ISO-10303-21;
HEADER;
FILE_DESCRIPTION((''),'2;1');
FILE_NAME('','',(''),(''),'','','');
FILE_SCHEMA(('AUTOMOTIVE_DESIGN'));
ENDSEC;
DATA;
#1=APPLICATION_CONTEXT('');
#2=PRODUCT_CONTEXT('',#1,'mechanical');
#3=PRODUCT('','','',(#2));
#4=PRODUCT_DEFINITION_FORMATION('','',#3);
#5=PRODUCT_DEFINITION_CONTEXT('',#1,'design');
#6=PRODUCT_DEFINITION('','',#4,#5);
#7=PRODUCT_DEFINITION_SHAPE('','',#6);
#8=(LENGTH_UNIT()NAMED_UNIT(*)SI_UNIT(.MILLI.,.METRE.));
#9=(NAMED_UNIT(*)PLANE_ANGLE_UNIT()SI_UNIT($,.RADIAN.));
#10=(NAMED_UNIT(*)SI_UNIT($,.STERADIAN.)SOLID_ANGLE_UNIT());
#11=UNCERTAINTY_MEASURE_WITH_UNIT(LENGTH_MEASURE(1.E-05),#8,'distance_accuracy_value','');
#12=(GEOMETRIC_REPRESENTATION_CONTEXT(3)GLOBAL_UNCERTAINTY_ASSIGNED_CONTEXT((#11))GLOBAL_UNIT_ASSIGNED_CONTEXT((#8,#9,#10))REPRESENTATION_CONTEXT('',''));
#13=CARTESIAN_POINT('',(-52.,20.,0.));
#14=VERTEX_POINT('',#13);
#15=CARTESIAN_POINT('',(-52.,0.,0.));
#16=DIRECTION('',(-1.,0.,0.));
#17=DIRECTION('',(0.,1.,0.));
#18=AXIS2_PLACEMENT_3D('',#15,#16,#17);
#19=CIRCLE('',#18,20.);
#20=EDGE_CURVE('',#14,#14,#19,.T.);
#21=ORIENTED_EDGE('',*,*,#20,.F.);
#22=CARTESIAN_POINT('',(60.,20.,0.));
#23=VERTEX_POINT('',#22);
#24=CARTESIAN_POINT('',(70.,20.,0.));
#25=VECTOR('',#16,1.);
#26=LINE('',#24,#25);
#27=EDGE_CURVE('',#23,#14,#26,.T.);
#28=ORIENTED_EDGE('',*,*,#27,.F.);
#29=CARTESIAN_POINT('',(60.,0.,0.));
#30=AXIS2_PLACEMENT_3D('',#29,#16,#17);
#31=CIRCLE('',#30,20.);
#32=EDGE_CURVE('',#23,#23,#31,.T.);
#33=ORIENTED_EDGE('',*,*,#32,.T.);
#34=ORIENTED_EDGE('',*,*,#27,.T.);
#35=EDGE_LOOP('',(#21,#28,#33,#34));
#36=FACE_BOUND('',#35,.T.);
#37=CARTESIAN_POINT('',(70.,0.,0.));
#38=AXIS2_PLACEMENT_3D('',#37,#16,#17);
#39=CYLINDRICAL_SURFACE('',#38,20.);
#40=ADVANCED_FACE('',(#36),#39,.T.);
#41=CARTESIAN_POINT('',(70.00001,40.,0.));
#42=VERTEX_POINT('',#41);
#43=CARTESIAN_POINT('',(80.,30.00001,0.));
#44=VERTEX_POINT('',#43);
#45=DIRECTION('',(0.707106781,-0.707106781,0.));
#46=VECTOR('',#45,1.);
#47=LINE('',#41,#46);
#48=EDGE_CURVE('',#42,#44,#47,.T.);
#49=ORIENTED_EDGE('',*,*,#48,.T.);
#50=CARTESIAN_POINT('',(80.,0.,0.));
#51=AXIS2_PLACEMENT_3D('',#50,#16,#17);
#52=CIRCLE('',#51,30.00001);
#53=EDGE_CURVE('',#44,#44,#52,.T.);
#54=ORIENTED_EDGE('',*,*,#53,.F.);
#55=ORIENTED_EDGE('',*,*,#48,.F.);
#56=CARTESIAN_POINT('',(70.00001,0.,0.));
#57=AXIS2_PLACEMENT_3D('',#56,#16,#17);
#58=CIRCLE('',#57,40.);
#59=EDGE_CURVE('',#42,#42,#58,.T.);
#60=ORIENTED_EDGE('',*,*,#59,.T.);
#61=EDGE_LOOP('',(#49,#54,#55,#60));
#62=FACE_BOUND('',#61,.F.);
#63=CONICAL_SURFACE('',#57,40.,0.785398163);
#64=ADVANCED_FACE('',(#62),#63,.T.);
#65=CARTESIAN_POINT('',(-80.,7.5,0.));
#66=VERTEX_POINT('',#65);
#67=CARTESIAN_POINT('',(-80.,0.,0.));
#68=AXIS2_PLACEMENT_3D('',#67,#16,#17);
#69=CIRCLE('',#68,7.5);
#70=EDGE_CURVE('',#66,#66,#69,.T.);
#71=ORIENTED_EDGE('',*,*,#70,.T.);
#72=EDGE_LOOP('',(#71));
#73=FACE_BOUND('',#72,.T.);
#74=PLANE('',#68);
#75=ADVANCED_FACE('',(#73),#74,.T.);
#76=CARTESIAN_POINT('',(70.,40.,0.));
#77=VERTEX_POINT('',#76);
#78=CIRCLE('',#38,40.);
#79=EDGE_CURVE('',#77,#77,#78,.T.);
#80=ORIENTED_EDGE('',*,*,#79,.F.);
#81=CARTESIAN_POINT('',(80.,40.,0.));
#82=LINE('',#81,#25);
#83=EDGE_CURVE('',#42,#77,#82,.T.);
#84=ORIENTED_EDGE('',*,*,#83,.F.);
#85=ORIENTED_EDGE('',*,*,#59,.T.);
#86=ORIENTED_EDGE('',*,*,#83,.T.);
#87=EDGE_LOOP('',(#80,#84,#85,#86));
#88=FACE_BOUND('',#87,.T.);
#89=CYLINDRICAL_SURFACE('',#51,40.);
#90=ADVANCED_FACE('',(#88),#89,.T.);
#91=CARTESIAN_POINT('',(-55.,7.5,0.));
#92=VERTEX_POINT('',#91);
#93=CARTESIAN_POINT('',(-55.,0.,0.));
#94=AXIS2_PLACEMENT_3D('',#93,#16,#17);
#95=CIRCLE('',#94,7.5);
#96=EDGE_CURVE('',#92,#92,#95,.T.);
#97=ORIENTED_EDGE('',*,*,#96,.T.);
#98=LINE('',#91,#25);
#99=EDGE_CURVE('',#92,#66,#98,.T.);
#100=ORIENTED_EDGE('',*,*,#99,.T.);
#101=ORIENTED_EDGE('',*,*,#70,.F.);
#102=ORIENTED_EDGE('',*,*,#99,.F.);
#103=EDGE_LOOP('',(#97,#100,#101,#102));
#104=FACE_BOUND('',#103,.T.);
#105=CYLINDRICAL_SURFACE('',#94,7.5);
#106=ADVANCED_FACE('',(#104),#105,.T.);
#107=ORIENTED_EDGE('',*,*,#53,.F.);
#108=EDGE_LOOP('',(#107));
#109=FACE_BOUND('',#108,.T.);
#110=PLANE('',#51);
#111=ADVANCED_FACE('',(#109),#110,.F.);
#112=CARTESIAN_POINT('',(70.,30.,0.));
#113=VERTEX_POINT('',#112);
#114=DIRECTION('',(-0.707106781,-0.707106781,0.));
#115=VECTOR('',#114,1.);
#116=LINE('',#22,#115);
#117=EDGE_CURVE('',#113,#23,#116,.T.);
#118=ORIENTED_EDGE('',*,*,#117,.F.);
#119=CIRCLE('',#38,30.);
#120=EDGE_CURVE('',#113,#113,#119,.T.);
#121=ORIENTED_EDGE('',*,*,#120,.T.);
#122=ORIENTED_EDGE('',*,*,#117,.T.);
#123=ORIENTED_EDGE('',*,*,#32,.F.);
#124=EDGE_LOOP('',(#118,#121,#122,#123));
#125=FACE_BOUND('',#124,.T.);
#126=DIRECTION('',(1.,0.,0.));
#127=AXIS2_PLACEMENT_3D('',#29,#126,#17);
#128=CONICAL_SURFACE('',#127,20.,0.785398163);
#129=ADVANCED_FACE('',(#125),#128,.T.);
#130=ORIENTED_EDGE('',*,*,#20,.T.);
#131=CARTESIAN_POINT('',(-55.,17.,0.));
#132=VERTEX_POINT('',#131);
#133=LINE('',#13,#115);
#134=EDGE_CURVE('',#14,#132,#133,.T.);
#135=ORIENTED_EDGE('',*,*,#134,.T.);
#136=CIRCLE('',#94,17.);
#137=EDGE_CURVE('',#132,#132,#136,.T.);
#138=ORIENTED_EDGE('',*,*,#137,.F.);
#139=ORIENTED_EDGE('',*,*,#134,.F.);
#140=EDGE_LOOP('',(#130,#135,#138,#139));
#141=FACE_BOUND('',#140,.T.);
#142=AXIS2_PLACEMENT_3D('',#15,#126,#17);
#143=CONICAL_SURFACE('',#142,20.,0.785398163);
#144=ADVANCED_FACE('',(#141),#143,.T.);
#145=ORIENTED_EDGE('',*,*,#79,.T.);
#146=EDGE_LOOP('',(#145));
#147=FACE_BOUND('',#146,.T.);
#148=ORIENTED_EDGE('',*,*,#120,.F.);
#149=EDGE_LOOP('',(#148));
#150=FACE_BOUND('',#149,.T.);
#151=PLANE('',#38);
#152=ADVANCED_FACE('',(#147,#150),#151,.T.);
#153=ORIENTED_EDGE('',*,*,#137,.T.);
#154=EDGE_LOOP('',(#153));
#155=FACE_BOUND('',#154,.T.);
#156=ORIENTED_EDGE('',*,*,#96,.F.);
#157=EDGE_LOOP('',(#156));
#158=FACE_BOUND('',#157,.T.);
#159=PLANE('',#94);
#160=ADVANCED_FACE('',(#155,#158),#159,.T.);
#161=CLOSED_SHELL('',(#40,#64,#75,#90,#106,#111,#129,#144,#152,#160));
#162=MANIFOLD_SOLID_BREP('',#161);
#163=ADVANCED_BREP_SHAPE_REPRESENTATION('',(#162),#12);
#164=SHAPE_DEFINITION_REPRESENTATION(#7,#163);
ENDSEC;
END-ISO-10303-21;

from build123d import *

# Parameters (mm, degrees)
F2_SIZE2 = 10
F2_SIZE  = 10
F3_SIZE2 = 9.99999
F3_SIZE  = 9.99999
F4_SIZE2 = 3
F4_SIZE  = 3


# Not quite as in the source:
# - a fillet or chamfer is up to 0.001 mm smaller than in the source, because OpenCascade refuses the exact size


with BuildPart() as f1:
    # F0 (on Top) → F1 (revolve)
    with BuildSketch(Plane.XY):
        Polygon((-80, 7.5), (-80, 0), (80, 0), (80, 40), (70, 40), (70, 20), (-55, 20), (-55, 7.5), align=None)
    revolve(axis=Axis((0, 0, 0), (-1, 0, 0)))

    # F2
    f2_edges = [f1.edges().sort_by_distance(p)[0] for p in [
        (70, -20, 0),
    ]]
    chamfer(f2_edges, length=F2_SIZE, length2=F2_SIZE2)

    # F3 (size 10 and 10 in the source; OpenCascade refuses exactly that, so slightly less here)
    f3_edges = [f1.edges().sort_by_distance(p)[0] for p in [
        (80, -40, 0),
    ]]
    chamfer(f3_edges, length=F3_SIZE, length2=F3_SIZE2)

    # F4
    f4_edges = [f1.edges().sort_by_distance(p)[0] for p in [
        (-55, -20, 0),
    ]]
    chamfer(f4_edges, length=F4_SIZE, length2=F4_SIZE2)


solid = f1.part
